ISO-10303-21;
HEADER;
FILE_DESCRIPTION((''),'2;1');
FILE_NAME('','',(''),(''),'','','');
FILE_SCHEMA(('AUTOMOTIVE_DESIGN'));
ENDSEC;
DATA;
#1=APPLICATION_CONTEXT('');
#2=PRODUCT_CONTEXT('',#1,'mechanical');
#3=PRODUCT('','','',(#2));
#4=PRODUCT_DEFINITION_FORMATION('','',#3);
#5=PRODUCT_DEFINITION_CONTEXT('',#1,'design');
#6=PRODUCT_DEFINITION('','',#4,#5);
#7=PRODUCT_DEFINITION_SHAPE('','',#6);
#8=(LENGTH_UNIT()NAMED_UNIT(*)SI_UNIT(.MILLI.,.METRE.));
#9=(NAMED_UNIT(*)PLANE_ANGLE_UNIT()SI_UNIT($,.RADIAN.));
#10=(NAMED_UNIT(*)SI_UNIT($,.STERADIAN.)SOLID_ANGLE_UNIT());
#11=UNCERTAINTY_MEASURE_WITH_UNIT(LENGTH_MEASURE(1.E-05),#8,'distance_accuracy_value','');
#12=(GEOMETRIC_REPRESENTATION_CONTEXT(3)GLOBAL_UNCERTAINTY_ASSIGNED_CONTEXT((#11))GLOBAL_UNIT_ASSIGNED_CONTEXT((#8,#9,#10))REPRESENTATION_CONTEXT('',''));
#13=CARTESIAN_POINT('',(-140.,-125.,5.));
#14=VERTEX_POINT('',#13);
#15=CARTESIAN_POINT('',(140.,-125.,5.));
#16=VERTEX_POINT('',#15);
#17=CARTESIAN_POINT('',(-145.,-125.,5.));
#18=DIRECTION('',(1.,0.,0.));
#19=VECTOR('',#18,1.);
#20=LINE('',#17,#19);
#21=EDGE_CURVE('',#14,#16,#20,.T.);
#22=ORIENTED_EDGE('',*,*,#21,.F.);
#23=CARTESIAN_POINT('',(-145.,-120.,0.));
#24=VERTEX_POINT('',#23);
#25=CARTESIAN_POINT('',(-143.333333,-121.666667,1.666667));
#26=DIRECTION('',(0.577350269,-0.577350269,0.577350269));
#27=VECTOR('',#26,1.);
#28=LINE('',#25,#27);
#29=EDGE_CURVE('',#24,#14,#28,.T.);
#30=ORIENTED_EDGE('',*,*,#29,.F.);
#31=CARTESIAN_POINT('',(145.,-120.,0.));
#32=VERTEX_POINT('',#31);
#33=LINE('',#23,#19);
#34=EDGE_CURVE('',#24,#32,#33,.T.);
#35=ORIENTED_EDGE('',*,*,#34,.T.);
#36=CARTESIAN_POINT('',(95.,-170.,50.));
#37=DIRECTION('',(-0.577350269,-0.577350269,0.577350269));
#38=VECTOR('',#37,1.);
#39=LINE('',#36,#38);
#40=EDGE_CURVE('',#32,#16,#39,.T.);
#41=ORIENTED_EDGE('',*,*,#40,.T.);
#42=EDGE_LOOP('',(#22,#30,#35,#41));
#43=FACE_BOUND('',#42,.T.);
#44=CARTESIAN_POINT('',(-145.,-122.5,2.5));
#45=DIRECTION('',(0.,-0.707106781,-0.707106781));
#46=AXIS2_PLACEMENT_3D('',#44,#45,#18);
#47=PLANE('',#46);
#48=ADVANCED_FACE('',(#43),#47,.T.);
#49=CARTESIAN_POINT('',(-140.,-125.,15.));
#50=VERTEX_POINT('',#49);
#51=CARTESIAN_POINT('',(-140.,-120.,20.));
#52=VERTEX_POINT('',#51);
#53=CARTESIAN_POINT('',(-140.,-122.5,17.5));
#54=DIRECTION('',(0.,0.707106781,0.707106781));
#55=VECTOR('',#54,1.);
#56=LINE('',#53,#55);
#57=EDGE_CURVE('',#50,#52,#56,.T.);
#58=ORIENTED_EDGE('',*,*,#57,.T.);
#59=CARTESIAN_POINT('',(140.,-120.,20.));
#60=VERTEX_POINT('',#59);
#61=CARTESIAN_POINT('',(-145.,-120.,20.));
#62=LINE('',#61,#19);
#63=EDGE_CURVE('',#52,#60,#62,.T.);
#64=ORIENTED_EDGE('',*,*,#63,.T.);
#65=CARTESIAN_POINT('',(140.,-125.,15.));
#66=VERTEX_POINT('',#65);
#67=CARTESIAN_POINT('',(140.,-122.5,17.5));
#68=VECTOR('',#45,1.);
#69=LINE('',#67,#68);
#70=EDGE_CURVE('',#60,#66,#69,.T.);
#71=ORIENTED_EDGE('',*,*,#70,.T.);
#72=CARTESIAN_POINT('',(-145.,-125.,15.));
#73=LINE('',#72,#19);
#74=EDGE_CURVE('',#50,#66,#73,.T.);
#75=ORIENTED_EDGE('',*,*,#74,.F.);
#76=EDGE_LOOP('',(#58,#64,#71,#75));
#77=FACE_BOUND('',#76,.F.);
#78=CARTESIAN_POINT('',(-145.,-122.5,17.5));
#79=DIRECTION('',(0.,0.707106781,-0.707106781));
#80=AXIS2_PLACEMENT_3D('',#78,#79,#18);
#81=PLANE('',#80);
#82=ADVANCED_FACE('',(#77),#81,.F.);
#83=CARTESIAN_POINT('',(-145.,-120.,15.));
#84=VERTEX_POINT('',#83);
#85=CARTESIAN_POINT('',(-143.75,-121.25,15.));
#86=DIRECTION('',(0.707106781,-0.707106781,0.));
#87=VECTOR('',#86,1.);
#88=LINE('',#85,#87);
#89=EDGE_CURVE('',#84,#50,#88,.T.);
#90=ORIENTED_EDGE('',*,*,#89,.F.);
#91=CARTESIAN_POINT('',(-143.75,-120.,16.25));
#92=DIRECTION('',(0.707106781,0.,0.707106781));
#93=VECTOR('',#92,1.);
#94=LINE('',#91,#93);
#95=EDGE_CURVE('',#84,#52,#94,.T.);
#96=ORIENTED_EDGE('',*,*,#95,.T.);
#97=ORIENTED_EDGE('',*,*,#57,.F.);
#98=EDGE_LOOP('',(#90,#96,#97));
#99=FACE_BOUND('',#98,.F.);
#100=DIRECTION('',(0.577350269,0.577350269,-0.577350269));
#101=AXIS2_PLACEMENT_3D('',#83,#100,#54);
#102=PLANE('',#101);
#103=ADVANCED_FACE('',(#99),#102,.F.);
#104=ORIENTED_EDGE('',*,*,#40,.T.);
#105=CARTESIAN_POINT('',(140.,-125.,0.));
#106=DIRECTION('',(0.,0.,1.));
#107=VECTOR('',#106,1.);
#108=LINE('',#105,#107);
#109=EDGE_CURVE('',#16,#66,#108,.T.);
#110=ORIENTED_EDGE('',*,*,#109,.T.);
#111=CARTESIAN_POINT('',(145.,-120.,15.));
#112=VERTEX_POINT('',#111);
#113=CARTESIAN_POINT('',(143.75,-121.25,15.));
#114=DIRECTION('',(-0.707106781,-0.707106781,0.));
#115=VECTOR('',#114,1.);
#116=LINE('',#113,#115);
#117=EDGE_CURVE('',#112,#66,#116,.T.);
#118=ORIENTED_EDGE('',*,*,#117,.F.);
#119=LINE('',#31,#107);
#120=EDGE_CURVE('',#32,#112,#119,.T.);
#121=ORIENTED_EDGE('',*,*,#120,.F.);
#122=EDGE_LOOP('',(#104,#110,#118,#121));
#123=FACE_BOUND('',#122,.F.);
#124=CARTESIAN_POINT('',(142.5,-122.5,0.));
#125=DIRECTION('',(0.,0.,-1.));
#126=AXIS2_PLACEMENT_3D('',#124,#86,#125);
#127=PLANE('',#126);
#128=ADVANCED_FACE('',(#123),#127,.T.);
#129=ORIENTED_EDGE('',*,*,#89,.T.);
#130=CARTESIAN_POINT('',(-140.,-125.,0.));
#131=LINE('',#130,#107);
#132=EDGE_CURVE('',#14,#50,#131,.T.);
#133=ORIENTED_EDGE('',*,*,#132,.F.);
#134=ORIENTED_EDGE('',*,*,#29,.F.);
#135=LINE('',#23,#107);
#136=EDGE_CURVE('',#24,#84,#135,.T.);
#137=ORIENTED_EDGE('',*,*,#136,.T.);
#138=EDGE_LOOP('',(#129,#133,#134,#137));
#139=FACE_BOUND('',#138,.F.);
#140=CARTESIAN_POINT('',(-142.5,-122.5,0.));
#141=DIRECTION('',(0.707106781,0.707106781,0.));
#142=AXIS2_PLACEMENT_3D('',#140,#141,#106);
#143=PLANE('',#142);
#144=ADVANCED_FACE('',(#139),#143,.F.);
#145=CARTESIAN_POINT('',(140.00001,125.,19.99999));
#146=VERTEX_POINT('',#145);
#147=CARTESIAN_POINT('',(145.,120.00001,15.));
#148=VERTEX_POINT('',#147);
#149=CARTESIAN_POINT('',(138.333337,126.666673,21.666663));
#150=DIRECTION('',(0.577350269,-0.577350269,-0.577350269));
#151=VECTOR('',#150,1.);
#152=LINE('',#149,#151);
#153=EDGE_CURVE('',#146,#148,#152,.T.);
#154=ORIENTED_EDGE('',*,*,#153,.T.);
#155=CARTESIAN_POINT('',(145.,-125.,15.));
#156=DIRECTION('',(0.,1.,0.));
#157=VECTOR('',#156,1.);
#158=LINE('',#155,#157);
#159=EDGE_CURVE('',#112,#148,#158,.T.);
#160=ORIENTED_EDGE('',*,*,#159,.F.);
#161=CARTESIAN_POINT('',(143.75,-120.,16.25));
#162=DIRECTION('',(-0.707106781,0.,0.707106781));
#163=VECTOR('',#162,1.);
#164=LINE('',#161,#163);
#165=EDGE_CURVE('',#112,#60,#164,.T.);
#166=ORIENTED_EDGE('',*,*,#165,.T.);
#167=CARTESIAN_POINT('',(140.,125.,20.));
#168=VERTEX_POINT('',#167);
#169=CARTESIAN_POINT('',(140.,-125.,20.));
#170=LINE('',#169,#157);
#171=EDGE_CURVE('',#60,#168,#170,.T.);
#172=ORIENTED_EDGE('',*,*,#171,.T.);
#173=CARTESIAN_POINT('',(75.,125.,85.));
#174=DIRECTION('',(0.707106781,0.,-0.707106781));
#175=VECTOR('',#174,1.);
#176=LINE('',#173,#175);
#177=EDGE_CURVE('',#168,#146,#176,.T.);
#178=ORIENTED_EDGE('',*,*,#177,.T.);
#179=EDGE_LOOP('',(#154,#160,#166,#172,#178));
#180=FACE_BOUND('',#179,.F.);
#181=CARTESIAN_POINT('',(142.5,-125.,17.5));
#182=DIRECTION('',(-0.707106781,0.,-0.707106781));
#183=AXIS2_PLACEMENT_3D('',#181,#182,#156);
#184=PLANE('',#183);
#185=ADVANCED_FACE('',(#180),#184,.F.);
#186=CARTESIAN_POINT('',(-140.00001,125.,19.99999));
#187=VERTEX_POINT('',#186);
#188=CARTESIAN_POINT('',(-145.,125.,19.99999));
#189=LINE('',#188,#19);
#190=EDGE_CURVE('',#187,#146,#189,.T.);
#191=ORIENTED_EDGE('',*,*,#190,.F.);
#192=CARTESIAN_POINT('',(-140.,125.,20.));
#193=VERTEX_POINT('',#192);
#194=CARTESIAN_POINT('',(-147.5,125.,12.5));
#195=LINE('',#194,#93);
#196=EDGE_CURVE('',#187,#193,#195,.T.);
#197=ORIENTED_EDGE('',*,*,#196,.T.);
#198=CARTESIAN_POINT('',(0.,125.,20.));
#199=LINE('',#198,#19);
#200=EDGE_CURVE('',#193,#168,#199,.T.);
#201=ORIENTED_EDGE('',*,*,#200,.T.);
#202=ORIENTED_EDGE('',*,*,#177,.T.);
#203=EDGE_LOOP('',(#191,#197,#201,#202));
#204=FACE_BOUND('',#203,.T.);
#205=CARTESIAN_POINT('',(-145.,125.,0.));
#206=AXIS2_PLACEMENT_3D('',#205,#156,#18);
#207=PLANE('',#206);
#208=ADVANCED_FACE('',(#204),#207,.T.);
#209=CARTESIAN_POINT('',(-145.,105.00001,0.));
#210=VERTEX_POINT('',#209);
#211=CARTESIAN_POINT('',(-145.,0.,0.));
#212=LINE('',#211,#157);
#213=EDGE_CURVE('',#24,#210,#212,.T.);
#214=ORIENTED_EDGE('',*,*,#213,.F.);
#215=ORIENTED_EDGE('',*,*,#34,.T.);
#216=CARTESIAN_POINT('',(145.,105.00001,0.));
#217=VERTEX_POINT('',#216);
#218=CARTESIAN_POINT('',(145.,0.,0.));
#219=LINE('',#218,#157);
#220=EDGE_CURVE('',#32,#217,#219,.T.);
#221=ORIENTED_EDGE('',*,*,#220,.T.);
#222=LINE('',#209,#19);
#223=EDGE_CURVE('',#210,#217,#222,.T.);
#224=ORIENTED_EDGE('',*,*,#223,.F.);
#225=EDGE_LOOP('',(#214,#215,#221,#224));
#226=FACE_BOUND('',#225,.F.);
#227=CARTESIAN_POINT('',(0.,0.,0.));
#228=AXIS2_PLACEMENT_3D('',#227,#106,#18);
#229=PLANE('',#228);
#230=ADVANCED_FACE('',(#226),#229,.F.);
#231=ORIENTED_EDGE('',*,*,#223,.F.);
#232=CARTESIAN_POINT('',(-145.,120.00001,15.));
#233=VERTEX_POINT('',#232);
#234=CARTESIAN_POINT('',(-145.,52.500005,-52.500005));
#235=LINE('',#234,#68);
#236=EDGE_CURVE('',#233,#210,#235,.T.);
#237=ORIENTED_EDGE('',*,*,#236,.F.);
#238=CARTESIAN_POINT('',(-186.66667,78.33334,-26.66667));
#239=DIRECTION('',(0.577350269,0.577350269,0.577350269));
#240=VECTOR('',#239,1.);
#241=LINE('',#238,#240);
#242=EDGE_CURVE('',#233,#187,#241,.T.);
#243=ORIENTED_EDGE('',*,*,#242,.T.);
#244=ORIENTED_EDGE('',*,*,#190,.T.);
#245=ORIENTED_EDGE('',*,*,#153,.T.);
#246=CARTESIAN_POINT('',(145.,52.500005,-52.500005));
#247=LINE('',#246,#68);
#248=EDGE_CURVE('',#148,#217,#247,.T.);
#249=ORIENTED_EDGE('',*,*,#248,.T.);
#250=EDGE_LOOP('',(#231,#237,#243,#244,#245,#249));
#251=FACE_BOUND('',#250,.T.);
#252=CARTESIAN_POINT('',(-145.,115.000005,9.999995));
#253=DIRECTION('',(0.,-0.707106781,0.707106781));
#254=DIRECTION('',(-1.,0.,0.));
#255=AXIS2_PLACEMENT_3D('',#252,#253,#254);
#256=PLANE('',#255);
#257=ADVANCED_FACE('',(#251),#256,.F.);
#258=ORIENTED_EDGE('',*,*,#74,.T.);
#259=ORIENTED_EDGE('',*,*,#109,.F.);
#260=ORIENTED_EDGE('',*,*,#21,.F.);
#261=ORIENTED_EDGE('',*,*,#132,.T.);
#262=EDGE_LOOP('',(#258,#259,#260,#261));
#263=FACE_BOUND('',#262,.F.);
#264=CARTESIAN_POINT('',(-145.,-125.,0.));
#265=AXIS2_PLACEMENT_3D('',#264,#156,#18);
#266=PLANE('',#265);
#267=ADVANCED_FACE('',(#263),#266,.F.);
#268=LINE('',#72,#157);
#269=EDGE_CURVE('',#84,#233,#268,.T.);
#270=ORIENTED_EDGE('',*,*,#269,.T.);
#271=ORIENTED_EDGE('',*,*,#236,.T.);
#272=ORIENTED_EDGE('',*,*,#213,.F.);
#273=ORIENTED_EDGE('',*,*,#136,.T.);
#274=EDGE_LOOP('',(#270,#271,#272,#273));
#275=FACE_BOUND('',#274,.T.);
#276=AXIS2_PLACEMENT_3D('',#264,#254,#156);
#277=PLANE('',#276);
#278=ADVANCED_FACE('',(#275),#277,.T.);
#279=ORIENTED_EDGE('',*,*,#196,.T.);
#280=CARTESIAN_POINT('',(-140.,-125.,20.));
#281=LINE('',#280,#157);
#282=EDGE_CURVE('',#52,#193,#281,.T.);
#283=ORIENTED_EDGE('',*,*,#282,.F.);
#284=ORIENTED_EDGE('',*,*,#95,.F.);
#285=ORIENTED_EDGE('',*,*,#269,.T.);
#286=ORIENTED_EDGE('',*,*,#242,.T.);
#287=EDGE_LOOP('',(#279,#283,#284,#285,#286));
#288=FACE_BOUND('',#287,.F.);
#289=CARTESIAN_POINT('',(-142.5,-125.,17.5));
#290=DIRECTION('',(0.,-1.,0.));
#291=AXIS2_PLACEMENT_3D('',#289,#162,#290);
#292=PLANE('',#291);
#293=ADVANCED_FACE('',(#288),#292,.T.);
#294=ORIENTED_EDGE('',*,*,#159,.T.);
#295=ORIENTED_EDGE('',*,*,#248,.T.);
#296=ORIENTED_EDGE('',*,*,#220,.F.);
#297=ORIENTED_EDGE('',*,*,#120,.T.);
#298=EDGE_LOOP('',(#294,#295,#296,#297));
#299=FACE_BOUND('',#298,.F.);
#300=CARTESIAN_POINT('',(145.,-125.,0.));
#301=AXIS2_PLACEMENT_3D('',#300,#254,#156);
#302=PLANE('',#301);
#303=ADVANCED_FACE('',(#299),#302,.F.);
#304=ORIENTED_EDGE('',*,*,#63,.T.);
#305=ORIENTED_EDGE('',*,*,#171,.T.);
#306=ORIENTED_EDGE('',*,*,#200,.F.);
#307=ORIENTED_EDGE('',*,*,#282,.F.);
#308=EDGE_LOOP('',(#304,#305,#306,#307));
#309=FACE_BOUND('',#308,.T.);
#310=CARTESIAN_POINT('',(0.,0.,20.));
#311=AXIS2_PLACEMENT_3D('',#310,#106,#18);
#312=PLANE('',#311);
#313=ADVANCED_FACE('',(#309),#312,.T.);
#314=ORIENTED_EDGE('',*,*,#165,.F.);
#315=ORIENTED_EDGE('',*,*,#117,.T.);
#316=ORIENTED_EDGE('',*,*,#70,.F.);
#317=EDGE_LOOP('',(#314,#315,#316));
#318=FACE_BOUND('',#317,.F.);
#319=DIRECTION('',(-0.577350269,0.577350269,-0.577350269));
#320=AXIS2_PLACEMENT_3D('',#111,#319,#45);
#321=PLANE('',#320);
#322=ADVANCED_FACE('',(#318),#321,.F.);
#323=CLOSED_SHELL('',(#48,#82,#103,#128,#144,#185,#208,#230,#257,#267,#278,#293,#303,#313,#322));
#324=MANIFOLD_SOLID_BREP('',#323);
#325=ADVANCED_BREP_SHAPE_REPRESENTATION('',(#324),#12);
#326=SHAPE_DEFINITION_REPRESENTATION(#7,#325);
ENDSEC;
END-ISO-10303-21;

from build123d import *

# Parameters (mm, degrees)
F0_W     = 290
F0_H     = 250
F1_DEPTH = 20
F2_SIZE  = 19.99999
F3_SIZE  = 5


# Not quite as in the source:
# - a fillet or chamfer is up to 0.001 mm smaller than in the source, because OpenCascade refuses the exact size


with BuildPart() as f1:
    # F0 (on Top) → F1 (new body)
    with BuildSketch(Plane.XY):
        Rectangle(F0_W, F0_H)
    extrude(amount=F1_DEPTH)

    # F2 (size 20 in the source; OpenCascade refuses exactly that, so slightly less here)
    f2_edges = [f1.edges().sort_by_distance(p)[0] for p in [
        (0, 125, 0),
    ]]
    chamfer(f2_edges, length=F2_SIZE)

    # F3
    f3_edges = [f1.edges().sort_by_distance(p)[0] for p in [
        (0, -125, 20),
        (0, -125, 0),
        (145, 0, 20),
        (145, -125, 10),
        (-145, -125, 10),
        (-145, 0, 20),
    ]]
    chamfer(f3_edges, length=F3_SIZE)


solid = f1.part
